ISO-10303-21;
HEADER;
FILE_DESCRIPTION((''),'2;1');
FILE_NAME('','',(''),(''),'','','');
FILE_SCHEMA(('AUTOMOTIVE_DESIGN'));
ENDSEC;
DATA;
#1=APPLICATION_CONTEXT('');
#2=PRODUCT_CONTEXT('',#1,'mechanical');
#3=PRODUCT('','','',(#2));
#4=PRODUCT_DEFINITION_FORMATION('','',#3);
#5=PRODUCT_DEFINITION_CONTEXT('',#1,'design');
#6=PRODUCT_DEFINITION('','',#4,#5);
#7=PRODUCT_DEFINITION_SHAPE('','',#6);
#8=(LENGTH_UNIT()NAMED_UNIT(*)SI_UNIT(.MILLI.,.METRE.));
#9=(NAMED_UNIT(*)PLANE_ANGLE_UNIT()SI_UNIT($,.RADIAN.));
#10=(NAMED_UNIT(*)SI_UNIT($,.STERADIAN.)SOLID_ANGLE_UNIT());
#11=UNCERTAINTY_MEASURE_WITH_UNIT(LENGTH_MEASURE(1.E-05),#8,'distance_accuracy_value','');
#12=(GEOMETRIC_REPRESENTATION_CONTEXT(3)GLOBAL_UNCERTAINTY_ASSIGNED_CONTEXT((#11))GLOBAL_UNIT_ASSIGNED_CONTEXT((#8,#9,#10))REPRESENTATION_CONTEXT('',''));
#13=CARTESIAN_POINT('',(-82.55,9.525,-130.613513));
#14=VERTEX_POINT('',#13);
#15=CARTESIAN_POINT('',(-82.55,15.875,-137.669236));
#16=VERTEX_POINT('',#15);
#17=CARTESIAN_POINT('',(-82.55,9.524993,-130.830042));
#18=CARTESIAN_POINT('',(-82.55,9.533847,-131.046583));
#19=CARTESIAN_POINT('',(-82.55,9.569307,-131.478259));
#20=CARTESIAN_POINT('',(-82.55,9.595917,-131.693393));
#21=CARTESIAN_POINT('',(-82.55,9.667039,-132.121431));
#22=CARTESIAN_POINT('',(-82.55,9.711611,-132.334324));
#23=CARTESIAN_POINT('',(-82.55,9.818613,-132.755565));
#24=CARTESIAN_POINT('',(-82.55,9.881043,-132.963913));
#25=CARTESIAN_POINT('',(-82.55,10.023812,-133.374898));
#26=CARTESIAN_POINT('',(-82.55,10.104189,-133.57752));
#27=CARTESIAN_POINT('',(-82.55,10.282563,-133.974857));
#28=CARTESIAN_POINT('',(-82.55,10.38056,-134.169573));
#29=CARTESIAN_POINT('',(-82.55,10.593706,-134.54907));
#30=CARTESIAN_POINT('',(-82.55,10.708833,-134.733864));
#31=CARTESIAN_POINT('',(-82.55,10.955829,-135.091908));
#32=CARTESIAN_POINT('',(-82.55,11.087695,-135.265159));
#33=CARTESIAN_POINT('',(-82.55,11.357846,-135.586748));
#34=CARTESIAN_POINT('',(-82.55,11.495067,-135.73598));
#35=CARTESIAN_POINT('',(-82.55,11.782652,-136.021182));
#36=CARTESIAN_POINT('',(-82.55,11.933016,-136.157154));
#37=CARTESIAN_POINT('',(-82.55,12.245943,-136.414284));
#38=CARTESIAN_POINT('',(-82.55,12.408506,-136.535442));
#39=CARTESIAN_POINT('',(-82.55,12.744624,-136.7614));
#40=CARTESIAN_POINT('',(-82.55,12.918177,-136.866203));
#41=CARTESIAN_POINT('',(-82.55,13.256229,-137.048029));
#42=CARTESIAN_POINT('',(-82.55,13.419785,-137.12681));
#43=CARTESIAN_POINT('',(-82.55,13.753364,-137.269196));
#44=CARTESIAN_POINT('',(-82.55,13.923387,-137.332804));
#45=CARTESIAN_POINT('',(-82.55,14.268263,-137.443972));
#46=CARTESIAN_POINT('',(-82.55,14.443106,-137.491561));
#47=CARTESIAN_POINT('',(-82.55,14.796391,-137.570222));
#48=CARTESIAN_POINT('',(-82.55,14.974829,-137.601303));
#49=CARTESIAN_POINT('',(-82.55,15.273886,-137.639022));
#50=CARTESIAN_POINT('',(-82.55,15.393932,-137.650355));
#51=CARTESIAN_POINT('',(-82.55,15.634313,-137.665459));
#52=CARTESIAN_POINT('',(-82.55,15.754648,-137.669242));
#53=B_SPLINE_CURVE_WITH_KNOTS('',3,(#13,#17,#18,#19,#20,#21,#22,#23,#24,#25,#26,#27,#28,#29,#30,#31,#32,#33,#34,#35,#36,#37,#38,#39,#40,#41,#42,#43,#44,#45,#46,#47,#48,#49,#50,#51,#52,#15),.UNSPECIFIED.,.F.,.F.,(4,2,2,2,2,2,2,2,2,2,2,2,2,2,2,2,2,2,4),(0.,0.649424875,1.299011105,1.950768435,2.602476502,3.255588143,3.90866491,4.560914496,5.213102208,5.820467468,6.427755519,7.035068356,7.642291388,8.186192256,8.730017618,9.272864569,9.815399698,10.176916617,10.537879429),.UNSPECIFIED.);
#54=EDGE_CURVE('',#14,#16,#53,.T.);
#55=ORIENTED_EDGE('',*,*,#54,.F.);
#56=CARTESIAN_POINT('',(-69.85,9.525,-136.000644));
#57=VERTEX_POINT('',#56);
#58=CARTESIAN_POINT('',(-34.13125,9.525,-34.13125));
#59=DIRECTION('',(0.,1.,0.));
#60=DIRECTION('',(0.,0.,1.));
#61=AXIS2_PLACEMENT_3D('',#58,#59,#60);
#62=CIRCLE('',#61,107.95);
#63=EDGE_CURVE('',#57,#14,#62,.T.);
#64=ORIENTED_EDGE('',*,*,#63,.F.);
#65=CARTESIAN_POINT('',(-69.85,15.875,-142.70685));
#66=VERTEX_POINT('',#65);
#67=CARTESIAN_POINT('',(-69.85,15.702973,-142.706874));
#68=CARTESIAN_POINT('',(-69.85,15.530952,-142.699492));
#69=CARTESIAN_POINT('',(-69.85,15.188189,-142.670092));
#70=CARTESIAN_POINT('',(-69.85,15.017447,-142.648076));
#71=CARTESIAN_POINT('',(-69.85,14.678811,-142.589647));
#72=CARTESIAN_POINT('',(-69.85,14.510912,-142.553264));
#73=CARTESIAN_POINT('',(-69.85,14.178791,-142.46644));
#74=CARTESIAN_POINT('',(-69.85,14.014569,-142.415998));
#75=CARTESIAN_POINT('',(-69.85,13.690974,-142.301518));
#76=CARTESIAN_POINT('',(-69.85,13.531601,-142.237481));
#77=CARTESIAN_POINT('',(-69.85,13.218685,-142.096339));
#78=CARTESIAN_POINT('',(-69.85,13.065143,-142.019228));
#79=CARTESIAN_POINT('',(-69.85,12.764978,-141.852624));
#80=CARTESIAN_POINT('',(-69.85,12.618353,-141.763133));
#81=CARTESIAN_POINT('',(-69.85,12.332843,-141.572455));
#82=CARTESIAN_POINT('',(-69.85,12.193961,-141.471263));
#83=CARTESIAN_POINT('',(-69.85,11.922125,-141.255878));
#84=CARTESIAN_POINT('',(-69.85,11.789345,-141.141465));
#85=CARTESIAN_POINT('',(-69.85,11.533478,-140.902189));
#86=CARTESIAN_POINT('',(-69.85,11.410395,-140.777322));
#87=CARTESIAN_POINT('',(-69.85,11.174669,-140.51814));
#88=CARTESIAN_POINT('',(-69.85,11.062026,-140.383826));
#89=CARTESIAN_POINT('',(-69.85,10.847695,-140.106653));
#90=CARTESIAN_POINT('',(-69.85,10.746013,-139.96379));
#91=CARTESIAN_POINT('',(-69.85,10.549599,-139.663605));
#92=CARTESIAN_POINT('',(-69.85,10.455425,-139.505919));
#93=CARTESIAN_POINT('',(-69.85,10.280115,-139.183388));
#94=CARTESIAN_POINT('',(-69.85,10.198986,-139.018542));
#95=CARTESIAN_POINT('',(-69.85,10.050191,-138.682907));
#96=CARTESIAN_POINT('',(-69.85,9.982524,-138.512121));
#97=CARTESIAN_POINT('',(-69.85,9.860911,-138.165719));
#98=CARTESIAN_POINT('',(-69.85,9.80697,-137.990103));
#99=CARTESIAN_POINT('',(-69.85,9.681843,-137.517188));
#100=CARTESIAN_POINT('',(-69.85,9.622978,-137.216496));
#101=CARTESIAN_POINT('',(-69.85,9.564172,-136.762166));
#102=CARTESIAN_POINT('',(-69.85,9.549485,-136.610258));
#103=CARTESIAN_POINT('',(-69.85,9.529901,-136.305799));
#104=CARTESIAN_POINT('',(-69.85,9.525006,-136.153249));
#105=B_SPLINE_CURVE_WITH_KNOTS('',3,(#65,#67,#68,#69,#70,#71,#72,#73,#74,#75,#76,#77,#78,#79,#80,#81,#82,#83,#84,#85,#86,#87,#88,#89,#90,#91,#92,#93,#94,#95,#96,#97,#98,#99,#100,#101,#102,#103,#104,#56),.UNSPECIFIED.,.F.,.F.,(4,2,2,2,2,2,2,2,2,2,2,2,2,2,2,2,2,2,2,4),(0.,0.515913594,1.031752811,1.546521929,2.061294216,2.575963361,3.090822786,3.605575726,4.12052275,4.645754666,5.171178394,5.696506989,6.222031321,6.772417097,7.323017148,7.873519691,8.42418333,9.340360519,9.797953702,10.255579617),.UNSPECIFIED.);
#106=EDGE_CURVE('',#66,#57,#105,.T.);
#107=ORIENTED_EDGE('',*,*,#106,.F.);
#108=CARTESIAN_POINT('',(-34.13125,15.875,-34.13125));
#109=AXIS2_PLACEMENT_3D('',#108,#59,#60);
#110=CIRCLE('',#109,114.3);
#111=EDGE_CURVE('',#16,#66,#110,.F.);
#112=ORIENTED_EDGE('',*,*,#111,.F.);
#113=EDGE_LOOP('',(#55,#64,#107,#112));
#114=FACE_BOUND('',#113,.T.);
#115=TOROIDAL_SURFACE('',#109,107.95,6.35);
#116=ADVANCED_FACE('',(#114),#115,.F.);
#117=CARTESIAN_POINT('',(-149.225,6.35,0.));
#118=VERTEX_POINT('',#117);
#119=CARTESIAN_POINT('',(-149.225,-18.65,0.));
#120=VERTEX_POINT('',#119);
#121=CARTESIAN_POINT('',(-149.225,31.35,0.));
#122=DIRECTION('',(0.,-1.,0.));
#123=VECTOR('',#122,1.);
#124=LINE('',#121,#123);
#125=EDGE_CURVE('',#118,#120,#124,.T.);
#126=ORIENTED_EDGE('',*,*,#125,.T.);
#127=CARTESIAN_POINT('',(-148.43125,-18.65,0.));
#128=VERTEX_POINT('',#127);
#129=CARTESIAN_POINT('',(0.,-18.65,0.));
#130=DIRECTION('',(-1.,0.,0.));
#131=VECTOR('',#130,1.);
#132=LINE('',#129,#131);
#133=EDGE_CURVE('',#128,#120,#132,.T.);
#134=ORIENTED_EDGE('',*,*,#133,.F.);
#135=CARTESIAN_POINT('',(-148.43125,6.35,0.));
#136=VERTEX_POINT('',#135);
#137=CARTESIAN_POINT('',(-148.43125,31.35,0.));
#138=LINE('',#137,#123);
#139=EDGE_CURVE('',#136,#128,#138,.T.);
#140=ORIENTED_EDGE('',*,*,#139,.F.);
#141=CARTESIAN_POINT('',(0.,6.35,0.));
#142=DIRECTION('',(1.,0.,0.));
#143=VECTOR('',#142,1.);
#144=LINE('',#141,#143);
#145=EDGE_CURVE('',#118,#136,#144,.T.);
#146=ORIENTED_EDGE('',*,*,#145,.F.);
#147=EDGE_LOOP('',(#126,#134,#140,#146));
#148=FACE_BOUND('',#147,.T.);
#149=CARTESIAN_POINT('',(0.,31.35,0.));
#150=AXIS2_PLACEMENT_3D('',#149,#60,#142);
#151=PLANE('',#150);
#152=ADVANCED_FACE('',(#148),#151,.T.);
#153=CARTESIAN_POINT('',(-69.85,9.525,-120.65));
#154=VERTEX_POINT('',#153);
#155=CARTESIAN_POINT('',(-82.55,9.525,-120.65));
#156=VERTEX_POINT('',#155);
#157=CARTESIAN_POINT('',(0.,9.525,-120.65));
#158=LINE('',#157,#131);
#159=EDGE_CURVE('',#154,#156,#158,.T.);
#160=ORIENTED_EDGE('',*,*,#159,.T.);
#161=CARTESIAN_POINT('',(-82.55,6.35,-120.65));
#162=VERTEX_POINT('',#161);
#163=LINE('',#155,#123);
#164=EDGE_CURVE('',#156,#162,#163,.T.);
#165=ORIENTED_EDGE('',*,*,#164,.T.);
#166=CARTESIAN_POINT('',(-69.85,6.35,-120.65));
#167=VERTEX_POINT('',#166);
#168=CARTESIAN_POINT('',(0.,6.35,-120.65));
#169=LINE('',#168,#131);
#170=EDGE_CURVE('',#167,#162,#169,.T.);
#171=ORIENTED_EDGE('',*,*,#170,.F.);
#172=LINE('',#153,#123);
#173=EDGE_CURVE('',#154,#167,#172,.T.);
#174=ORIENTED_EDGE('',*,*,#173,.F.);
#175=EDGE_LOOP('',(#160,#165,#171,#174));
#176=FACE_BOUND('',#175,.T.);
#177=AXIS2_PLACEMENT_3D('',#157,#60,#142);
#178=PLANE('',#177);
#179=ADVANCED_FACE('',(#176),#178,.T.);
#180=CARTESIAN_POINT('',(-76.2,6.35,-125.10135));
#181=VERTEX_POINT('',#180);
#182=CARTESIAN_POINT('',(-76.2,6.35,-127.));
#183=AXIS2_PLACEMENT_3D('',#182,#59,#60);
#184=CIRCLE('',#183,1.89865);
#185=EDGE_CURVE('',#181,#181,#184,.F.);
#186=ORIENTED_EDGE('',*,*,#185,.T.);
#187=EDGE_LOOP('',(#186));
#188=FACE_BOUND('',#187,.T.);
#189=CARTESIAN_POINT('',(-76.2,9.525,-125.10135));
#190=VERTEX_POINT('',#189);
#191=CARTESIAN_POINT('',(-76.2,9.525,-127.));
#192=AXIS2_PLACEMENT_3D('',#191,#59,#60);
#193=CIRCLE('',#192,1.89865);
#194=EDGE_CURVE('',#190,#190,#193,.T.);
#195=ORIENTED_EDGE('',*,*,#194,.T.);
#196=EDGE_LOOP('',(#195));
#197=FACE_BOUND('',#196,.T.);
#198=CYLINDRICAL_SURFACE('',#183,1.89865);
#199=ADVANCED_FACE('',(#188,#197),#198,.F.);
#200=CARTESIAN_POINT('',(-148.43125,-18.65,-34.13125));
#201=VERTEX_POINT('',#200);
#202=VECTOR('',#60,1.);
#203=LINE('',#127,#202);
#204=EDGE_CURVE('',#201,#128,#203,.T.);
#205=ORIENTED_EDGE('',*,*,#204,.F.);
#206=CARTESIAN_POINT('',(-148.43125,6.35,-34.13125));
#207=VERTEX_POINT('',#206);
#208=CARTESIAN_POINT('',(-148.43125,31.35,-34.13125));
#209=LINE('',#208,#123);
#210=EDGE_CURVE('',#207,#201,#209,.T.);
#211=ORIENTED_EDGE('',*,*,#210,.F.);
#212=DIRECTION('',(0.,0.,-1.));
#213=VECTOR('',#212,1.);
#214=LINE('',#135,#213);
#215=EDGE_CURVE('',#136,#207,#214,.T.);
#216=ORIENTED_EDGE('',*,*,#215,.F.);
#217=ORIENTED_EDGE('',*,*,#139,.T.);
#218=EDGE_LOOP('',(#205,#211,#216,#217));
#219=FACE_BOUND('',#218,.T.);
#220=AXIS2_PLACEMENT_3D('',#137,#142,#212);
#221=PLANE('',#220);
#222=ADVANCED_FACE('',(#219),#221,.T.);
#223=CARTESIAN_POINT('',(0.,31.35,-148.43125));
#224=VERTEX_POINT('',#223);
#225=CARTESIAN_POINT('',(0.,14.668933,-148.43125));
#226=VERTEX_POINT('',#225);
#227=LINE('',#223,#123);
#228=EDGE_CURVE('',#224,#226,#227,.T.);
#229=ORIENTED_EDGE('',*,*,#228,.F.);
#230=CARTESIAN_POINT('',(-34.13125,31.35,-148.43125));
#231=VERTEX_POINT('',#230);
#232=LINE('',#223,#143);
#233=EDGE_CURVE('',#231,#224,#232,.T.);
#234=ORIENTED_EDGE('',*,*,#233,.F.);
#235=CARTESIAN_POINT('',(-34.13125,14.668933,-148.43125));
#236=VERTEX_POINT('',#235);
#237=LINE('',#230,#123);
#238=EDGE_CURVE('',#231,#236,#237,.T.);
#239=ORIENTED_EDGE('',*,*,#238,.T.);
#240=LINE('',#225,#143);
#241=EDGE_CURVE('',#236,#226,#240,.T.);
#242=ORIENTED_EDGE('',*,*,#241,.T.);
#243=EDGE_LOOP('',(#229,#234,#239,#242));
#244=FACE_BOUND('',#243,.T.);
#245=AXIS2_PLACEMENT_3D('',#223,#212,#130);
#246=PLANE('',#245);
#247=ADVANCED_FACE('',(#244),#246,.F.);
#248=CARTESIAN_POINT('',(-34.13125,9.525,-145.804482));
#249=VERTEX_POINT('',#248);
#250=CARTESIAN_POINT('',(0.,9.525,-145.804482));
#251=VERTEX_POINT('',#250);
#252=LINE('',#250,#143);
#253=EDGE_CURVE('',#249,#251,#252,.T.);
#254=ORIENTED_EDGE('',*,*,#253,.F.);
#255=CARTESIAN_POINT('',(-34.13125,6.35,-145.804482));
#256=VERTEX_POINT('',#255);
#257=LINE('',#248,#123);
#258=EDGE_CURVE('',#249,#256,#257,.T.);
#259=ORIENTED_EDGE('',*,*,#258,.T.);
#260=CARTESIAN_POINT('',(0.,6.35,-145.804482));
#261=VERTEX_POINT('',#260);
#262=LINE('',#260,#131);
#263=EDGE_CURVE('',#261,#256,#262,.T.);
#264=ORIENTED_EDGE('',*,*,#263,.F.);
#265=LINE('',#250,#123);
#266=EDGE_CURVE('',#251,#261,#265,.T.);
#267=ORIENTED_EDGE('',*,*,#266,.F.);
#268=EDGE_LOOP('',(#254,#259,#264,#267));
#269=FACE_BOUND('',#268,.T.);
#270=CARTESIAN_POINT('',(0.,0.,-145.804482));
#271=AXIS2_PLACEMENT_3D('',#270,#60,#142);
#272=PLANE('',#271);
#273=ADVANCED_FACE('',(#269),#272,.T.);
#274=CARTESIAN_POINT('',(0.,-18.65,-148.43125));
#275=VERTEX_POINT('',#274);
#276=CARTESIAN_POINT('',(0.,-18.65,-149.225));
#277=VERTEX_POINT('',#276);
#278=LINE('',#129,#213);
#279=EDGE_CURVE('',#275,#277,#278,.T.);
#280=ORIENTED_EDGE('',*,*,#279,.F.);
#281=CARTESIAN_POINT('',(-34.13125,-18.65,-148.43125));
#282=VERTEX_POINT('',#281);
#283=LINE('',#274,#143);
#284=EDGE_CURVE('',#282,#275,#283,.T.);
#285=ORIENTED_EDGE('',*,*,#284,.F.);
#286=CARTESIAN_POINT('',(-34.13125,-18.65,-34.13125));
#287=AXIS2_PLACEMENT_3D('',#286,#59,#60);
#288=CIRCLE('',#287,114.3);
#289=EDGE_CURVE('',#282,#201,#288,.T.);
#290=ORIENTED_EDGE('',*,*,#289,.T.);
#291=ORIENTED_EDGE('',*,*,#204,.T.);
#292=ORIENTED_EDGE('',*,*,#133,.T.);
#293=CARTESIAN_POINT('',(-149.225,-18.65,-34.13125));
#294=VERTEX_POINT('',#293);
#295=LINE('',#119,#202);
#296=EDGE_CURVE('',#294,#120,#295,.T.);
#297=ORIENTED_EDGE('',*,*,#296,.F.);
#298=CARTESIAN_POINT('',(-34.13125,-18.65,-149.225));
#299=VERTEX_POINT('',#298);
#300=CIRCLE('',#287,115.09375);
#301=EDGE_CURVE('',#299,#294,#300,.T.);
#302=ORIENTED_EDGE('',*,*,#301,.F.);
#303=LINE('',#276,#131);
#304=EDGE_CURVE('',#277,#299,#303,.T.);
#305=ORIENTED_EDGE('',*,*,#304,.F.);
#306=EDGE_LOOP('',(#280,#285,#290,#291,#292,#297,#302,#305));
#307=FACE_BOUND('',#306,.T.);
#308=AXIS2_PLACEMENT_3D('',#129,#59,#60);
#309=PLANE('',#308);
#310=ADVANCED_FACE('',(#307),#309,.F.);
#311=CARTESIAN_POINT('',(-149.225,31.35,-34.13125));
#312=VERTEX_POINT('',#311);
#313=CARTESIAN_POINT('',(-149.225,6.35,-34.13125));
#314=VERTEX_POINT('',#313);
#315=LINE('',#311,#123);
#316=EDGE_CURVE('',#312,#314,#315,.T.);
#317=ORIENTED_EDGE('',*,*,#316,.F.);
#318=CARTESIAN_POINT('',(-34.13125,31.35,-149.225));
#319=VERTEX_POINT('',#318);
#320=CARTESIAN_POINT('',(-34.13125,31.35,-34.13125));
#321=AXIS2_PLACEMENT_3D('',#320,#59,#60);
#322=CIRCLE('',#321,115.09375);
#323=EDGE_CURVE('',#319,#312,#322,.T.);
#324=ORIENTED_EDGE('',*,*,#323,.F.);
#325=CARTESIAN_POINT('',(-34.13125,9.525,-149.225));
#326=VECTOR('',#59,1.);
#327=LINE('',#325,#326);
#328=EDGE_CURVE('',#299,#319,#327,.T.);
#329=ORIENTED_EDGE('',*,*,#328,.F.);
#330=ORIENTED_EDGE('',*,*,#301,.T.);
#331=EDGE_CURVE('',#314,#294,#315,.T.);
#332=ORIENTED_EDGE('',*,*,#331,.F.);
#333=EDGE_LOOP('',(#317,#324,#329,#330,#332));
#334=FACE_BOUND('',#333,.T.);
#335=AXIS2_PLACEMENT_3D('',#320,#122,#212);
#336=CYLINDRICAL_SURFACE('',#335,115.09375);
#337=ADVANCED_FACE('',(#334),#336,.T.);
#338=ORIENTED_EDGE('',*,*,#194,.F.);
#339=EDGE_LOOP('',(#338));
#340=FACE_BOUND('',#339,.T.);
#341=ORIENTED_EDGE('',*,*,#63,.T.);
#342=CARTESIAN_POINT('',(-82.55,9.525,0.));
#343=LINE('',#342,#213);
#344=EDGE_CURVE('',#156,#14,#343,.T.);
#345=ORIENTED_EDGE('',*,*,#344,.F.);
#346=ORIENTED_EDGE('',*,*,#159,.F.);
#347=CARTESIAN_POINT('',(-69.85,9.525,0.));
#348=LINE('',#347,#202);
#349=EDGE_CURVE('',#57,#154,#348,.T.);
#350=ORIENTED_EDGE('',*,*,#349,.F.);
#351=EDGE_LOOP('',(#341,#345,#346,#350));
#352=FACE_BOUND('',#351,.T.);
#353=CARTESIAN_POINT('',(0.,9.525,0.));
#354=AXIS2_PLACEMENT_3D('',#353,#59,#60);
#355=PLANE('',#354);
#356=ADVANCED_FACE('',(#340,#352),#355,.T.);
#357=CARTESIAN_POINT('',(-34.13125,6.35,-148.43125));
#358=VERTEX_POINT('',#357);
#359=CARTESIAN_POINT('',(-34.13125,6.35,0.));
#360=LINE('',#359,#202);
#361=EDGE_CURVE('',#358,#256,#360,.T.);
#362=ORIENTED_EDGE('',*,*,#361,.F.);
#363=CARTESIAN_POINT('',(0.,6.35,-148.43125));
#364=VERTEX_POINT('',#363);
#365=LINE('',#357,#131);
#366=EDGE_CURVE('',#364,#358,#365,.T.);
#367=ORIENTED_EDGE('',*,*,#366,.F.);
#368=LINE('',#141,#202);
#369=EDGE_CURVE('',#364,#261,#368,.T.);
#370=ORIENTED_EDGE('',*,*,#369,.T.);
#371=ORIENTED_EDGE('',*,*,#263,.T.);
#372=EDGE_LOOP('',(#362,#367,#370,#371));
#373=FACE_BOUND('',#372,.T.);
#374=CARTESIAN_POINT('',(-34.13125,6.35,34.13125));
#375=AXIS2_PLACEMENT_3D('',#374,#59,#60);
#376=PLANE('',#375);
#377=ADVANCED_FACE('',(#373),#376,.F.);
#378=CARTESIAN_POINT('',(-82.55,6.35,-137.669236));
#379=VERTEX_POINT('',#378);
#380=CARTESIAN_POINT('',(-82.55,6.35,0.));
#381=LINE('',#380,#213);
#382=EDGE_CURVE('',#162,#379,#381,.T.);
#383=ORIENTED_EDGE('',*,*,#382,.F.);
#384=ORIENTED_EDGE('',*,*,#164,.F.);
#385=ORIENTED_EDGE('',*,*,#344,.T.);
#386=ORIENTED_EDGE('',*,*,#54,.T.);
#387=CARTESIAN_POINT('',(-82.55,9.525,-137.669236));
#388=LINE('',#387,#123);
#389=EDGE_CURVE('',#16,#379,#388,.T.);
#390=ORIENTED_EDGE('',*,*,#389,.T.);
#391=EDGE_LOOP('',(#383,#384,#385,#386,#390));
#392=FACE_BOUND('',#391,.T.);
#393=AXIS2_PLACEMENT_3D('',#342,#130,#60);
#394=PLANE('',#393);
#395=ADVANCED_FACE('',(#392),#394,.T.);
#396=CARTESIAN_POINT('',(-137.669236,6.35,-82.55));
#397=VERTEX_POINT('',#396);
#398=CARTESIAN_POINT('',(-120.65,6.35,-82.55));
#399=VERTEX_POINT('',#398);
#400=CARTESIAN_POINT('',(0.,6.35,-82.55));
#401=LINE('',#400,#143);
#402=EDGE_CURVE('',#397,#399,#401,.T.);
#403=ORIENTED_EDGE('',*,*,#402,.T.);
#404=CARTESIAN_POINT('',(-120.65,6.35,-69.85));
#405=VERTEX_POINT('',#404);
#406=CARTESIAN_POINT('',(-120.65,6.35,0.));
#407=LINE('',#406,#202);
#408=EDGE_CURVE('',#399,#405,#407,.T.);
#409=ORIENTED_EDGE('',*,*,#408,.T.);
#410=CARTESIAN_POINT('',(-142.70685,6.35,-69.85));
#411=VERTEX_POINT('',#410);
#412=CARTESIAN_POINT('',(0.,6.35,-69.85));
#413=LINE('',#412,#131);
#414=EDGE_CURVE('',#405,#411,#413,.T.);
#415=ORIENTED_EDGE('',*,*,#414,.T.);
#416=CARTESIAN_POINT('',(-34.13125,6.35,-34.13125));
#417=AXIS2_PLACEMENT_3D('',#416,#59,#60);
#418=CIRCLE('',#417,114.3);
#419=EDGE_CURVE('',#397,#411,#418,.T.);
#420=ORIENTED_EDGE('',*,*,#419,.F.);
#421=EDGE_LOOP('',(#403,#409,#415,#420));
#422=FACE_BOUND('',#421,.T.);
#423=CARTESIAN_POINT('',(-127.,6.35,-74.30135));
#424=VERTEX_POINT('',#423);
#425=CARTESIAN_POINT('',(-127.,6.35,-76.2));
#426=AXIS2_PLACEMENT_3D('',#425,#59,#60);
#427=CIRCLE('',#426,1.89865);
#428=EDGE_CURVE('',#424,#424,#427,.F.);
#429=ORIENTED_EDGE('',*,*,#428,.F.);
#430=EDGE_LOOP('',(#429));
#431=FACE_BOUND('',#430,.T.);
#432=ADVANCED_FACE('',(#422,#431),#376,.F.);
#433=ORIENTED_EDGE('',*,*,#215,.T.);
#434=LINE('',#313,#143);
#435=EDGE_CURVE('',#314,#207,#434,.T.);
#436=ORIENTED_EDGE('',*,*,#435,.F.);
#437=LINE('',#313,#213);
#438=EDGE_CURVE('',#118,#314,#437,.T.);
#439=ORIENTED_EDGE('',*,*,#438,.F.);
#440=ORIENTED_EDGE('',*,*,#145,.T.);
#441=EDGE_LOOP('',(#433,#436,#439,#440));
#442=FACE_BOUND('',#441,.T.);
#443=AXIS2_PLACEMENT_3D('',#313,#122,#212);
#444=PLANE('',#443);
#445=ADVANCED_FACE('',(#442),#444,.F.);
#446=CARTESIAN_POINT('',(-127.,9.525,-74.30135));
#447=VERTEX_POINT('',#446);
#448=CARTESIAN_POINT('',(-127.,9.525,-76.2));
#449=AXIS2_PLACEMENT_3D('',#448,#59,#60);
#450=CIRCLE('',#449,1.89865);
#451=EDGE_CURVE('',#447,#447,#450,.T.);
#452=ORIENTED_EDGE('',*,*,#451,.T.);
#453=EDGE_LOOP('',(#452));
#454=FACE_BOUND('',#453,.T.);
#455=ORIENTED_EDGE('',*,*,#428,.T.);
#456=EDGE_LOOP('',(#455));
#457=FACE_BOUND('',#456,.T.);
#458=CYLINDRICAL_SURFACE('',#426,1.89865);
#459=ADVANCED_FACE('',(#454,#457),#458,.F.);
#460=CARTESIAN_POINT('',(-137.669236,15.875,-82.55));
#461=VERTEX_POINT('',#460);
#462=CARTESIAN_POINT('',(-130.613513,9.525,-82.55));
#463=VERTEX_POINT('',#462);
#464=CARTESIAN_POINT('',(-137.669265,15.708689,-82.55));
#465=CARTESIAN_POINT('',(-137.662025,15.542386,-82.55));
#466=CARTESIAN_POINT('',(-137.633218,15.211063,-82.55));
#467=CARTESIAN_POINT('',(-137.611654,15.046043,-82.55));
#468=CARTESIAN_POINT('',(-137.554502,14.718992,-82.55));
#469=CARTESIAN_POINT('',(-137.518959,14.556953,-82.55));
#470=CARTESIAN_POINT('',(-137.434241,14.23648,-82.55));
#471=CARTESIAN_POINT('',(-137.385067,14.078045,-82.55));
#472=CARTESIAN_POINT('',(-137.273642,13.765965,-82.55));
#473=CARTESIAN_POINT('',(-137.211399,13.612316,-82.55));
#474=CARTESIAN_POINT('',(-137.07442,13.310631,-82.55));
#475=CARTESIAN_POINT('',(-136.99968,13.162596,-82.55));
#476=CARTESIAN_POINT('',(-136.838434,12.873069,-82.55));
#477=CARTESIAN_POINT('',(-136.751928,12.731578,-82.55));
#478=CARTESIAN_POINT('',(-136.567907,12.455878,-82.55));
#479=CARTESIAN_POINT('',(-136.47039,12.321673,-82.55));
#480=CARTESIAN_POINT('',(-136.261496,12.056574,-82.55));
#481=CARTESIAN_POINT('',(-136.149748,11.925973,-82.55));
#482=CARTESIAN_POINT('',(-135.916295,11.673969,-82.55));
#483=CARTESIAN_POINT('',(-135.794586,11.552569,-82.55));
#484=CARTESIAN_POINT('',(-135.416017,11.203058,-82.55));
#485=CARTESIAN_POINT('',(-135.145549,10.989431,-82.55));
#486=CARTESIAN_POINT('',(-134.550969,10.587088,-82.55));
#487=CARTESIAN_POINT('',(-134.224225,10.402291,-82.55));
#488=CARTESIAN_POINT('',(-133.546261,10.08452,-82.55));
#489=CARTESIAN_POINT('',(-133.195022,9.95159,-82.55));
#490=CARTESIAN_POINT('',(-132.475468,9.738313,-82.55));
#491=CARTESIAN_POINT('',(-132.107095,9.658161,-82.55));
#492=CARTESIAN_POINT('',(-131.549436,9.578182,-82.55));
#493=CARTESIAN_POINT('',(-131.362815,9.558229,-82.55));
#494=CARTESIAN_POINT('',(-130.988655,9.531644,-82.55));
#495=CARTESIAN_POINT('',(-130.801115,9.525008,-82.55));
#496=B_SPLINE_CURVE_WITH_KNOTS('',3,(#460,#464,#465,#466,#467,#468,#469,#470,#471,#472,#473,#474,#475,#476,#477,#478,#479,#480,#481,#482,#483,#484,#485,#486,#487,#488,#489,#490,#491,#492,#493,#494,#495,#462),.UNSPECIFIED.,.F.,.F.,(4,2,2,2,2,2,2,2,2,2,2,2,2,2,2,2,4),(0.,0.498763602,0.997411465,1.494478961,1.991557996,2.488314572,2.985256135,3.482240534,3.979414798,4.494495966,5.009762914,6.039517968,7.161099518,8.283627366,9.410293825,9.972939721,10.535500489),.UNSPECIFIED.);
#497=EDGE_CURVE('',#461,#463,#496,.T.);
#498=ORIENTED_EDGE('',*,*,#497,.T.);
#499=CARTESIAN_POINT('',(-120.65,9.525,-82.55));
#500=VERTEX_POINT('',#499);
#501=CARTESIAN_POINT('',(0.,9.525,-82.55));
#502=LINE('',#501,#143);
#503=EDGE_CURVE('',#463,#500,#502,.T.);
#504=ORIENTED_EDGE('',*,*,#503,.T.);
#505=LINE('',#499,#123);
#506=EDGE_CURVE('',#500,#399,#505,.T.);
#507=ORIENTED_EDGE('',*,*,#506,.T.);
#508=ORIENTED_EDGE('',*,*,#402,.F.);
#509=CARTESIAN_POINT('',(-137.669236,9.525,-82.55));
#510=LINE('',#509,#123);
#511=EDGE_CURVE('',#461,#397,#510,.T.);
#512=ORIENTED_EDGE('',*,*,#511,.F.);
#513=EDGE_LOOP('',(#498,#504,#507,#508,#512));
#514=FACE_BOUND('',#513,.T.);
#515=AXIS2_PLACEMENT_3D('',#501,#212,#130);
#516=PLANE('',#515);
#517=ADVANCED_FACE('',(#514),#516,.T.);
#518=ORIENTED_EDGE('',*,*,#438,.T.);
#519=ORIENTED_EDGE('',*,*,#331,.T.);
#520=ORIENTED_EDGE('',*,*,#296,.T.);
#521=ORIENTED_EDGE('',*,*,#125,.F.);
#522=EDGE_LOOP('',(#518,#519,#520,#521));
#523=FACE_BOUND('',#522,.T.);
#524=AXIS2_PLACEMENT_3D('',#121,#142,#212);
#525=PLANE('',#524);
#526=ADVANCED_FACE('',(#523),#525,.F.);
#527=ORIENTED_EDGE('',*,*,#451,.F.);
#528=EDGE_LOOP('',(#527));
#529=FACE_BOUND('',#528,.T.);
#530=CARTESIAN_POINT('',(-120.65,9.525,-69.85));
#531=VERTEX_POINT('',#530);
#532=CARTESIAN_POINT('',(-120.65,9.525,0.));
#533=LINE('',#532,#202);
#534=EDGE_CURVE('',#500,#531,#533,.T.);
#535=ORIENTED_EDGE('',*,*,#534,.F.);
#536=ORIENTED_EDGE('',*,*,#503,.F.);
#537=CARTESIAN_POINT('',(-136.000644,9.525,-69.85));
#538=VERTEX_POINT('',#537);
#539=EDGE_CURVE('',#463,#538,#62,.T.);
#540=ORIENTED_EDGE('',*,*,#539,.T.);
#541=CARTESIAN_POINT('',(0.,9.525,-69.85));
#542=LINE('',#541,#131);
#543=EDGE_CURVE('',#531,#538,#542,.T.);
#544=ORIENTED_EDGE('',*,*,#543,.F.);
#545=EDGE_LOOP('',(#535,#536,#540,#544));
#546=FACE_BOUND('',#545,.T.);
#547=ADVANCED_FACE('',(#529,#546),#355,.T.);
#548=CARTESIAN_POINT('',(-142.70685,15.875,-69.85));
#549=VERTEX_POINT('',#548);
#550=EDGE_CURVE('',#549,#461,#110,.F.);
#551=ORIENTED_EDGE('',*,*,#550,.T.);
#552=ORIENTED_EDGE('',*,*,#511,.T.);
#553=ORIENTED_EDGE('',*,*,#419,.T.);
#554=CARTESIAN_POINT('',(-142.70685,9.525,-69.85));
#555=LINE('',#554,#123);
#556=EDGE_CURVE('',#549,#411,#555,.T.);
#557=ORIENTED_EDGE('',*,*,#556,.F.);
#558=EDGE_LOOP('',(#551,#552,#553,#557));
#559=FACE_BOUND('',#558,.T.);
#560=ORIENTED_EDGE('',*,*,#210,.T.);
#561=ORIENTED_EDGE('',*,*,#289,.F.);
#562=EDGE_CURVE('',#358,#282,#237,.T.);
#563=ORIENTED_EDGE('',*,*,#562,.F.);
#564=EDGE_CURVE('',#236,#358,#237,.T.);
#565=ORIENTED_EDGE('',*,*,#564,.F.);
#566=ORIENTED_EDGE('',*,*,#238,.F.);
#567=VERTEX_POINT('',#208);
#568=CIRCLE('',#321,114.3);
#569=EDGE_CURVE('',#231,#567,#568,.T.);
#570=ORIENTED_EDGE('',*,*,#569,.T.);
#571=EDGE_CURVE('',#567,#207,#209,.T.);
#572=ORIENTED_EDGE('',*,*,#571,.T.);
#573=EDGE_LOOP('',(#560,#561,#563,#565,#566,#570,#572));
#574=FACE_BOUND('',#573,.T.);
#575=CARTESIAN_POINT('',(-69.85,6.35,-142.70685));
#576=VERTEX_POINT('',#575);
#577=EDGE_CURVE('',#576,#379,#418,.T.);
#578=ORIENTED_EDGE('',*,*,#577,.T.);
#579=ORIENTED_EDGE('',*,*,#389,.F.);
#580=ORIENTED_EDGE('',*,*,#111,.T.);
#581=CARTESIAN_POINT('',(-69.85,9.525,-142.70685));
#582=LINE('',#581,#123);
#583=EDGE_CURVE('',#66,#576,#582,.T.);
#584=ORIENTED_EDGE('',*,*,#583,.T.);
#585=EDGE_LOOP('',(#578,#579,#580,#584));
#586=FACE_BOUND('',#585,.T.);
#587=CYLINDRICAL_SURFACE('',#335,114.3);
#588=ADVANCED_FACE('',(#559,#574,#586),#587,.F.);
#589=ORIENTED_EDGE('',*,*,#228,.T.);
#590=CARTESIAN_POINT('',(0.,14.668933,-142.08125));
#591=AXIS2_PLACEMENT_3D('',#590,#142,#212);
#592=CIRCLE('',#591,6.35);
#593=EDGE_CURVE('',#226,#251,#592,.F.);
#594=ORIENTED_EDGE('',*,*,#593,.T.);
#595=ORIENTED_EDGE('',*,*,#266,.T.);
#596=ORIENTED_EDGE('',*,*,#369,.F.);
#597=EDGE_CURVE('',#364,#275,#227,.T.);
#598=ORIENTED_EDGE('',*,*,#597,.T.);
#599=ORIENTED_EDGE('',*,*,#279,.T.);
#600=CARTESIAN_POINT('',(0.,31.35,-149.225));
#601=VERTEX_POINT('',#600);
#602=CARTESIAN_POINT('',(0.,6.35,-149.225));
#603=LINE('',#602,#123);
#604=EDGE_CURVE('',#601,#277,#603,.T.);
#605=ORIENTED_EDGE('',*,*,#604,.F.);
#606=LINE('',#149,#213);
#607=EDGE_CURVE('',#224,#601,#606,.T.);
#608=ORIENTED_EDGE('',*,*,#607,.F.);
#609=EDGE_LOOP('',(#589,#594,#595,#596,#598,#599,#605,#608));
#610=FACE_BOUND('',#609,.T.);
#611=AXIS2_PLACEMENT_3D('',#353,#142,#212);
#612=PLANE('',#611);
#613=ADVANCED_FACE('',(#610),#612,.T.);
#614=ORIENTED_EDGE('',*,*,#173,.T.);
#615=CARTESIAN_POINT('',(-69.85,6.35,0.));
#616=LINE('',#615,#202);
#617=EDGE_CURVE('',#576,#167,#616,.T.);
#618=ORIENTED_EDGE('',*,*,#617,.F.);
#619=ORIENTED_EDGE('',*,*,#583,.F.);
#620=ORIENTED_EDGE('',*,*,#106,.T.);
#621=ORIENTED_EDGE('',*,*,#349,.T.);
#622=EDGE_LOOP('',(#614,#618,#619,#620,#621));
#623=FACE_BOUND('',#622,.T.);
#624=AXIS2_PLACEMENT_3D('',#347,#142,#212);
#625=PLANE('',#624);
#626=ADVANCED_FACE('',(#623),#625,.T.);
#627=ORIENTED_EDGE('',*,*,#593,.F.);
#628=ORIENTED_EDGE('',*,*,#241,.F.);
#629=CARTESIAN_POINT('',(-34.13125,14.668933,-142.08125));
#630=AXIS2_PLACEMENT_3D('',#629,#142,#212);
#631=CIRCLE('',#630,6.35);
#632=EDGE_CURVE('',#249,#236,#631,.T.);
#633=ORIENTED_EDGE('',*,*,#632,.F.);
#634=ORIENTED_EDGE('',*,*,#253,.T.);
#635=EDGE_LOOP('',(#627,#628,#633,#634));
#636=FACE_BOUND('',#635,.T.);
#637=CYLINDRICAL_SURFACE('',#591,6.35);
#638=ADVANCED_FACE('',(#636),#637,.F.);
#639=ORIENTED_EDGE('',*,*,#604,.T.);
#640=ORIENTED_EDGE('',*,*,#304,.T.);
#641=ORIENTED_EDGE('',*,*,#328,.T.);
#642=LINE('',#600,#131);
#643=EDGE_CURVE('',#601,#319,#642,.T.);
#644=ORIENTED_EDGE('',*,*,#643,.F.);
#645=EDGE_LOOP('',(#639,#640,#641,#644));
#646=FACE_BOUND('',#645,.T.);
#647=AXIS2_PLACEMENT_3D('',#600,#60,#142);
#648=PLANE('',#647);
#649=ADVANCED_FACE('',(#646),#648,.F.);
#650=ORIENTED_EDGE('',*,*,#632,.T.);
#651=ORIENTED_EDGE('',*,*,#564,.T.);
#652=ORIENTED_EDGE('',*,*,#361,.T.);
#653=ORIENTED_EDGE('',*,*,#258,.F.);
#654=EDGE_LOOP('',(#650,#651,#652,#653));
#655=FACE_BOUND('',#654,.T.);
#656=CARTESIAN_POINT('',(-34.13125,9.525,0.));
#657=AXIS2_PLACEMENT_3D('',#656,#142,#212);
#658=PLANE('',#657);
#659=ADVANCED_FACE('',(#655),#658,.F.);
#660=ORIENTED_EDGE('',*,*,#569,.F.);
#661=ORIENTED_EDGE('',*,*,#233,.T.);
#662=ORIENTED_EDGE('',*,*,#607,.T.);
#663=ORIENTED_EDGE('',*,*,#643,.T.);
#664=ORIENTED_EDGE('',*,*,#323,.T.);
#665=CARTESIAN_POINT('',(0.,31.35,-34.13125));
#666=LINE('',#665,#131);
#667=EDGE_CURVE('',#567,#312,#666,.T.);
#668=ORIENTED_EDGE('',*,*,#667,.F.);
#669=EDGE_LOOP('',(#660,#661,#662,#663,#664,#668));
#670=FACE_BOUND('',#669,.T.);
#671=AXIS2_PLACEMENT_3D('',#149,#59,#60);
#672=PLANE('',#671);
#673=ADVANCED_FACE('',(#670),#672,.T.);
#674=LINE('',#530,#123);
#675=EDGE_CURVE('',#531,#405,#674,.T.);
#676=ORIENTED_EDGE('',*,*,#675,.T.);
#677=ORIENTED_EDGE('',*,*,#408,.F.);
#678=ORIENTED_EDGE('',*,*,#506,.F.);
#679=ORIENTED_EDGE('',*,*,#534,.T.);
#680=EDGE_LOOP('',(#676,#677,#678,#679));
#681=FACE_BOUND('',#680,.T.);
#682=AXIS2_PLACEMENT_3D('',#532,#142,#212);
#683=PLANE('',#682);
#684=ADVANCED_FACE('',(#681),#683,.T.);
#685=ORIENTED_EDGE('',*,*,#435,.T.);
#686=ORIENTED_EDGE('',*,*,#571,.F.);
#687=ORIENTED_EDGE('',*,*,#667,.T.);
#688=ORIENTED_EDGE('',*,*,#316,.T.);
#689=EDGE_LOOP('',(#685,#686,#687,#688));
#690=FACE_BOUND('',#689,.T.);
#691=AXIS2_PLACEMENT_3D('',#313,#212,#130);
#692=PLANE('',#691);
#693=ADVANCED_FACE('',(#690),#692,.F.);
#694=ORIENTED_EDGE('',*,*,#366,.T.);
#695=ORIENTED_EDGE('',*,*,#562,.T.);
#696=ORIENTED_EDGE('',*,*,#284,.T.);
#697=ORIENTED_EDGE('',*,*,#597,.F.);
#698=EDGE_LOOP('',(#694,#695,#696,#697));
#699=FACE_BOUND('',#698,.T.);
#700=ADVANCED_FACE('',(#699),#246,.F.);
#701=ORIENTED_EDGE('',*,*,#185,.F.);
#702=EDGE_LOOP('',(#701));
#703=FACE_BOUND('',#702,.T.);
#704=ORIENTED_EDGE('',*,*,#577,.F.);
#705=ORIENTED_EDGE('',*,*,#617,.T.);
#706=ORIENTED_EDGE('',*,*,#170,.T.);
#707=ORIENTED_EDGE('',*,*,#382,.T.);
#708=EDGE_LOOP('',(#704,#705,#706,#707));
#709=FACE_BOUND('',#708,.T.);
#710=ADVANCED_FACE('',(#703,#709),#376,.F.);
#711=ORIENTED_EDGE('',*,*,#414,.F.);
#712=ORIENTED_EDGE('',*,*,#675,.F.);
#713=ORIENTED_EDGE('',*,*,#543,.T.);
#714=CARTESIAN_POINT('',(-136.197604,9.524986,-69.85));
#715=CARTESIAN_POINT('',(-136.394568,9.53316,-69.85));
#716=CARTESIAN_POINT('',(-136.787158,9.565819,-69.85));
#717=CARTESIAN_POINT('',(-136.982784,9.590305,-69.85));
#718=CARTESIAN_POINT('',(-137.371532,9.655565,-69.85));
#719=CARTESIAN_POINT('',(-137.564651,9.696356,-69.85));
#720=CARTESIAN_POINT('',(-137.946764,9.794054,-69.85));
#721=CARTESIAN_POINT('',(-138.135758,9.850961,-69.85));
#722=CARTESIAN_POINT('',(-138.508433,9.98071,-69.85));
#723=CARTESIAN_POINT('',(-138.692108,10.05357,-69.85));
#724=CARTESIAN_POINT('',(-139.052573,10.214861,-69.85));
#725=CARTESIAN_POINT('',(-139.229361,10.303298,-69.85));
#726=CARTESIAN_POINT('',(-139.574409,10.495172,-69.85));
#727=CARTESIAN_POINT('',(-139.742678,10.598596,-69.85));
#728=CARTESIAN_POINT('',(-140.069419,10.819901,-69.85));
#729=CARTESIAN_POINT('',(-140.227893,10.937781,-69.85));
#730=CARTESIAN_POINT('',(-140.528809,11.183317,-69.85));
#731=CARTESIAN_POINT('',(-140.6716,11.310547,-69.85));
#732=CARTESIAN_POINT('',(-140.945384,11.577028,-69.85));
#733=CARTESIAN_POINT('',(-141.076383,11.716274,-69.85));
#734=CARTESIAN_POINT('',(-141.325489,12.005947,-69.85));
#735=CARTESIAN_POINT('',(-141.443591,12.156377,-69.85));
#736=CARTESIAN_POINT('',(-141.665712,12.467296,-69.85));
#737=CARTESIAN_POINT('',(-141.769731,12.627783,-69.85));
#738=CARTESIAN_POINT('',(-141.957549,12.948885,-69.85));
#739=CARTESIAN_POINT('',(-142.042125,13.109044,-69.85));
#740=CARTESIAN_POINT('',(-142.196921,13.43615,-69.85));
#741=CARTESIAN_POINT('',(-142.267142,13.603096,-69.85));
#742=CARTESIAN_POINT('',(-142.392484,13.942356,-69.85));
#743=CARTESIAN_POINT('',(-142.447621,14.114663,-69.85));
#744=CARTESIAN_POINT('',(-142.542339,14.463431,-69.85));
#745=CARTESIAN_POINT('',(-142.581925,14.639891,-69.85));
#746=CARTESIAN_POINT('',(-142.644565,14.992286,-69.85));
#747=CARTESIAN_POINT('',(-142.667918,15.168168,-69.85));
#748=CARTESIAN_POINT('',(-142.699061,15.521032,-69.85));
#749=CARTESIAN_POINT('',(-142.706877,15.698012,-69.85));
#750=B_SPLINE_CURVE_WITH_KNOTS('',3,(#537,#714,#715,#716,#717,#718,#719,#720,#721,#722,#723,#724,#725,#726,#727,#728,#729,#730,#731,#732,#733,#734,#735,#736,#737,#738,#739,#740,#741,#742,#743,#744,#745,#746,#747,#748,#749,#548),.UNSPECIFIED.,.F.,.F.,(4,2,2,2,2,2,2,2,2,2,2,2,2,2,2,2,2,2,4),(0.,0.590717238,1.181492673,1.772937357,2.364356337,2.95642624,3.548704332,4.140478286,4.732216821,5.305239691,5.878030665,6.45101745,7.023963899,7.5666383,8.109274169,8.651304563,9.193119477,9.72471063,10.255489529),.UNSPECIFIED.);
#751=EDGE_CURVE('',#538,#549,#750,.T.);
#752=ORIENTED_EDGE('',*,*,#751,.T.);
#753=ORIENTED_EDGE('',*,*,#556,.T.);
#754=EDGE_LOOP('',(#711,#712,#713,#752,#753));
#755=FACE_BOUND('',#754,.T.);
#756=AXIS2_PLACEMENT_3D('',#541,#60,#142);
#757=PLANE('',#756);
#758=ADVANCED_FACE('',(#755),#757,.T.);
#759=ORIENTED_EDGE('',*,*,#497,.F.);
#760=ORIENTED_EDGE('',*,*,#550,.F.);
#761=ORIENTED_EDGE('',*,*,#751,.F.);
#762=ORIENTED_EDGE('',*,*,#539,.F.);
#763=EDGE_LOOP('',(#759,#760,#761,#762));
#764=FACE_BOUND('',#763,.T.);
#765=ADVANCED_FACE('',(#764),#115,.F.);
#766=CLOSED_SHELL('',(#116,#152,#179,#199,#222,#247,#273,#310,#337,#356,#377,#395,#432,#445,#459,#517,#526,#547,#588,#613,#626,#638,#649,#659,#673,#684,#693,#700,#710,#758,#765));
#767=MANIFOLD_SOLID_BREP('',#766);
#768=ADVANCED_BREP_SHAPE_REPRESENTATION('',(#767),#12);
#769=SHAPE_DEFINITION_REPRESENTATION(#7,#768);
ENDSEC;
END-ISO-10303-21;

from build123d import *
from build123d.topology import SkipClean

# Parameters (mm, degrees)
BOSS_EXTRUDE1_DEPTH      = 6.35
CUT_EXTRUDE1_DEPTH       = 6.35
M4_CLEARANCE_HOLE1_D     = 4.5
F_6_CLEARANCE_HOLE1_D    = 3.7973
F_6_CLEARANCE_HOLE2_D    = 3.7973
SKETCH29_R               = 1.898650000000008
BOSS_EXTRUDE4_DEPTH      = 3.175
CUT_EXTRUDE9_DEPTH       = 211.00951038732748
BOSS_EXTRUDE5_DEPTH      = 25
BOSS_EXTRUDE5_DEPTH_BACK = 25
BOSS_EXTRUDE6_DEPTH      = 3.420518063
SKETCH32_W               = 34.13124999999999
SKETCH32_H               = 3.175
BOSS_EXTRUDE7_DEPTH      = 3.420518063
FILLET2_R                = 6.35
FILLET3_R                = 6.35
SKETCH33_W               = 62.65129797244943
SKETCH33_H               = 51.38023684891144
CUT_EXTRUDE10_DEPTH      = 211.97362412866636


with BuildPart() as part:
    # Sketch1 → Boss-Extrude1 (new body)
    with BuildSketch(Plane(origin=(0, 0, 0), x_dir=(1, 0, 0), z_dir=(0, 1, 0))):
        with BuildLine():
            Line((-34.13124999999996, -148.43124999999998), (34.131250000000016, -148.43124999999998))
            ThreePointArc((34.131250000000016, -148.43124999999998), (114.9535550896224, -114.95355508962234), (148.43124999999998, -34.13124999999996))
            Line((148.43124999999998, -34.13124999999996), (148.43124999999998, 34.131250000000016))
            ThreePointArc((148.43124999999998, 34.131250000000016), (114.9535550896224, 114.9535550896224), (34.131250000000016, 148.43125000000003))
            Line((34.131250000000016, 148.43125000000003), (-34.13124999999996, 148.43125000000003))
            ThreePointArc((-34.13124999999996, 148.43125000000003), (-114.95355508962231, 114.95355508962237), (-148.43124999999992, 34.131250000000016))
            Line((-148.43124999999992, 34.131250000000016), (-148.43124999999992, -34.13124999999996))
            ThreePointArc((-148.43124999999992, -34.13124999999996), (-114.95355508962234, -114.95355508962234), (-34.13124999999996, -148.43124999999998))
        make_face()
    extrude(amount=BOSS_EXTRUDE1_DEPTH)

    # Sketch4 → Cut-Extrude1 (cut)
    # profile 1 of 4: a face of its own
    with BuildSketch(Plane(origin=(0, 6.35, 0), x_dir=(1, 0, 0), z_dir=(0, 1, 0))):
        with BuildLine():
            ThreePointArc((-39.4480000000008, 145.80448193711538), (-49.893930566331434, 144.3300216659586), (-59.52363351317686, 140.0218527227403))
            ThreePointArc((-59.52363351317686, 140.0218527227403), (-63.81750000000949, 132.2535819370977), (-59.52363351317676, 124.48531115145514))
            ThreePointArc((-59.52363351317676, 124.48531115145514), (-49.89393056632884, 120.17714220824536), (-39.448000000000604, 118.70268193708908))
            Line((-39.448000000000604, 118.70268193708908), (39.44799999999939, 118.70268193708088))
            ThreePointArc((39.44799999999939, 118.70268193708088), (49.89393056633003, 120.17714220823765), (59.52363351317546, 124.48531115145597))
            ThreePointArc((59.52363351317546, 124.48531115145597), (63.817500000008096, 132.25358193709857), (59.523633513170694, 140.0218527227337))
            ThreePointArc((59.523633513170694, 140.0218527227337), (49.893930566325004, 144.3300216659425), (39.4479999999992, 145.80448193710717))
            Line((39.4479999999992, 145.80448193710717), (-39.4480000000008, 145.80448193711538))
        make_face()
        with BuildLine():
            ThreePointArc((39.447999999999375, 120.29018193708089), (49.454528647108134, 121.70261990502122), (58.67916380898574, 125.82956825808905))
            ThreePointArc((58.67916380898574, 125.82956825808905), (62.229999999999336, 132.25358193709857), (58.67916380898565, 138.67759561610805))
            ThreePointArc((58.67916380898565, 138.67759561610805), (49.45452864710313, 142.80454396915894), (39.447999999999205, 144.21698193711595))
            Line((39.447999999999205, 144.21698193711595), (-39.44800000000079, 144.21698193711538))
            ThreePointArc((-39.44800000000079, 144.21698193711538), (-49.454528647109534, 142.80454396917506), (-58.67916380898715, 138.67759561610723))
            ThreePointArc((-58.67916380898715, 138.67759561610723), (-62.23000000000073, 132.25358193709772), (-58.67916380898706, 125.82956825808822))
            ThreePointArc((-58.67916380898706, 125.82956825808822), (-49.454528647104546, 121.70261990503734), (-39.44800000000062, 120.29018193708033))
            Line((-39.44800000000062, 120.29018193708033), (39.447999999999375, 120.29018193708089))
        make_face(mode=Mode.SUBTRACT)
    # profile 2 of 4: a face of its own
    with BuildSketch(Plane(origin=(0, 6.35, 0), x_dir=(1, 0, 0), z_dir=(0, 1, 0))):
        with BuildLine():
            Line((-39.44800000000062, 120.29018193708033), (39.447999999999375, 120.29018193708089))
            ThreePointArc((39.447999999999375, 120.29018193708089), (49.454528647108134, 121.70261990502122), (58.67916380898574, 125.82956825808905))
            ThreePointArc((58.67916380898574, 125.82956825808905), (62.229999999999336, 132.25358193709857), (58.67916380898565, 138.67759561610805))
            ThreePointArc((58.67916380898565, 138.67759561610805), (49.45452864710313, 142.80454396915894), (39.447999999999205, 144.21698193711595))
            Line((39.447999999999205, 144.21698193711595), (-39.44800000000079, 144.21698193711538))
            ThreePointArc((-39.44800000000079, 144.21698193711538), (-49.454528647109534, 142.80454396917506), (-58.67916380898715, 138.67759561610723))
            ThreePointArc((-58.67916380898715, 138.67759561610723), (-62.23000000000073, 132.25358193709772), (-58.67916380898706, 125.82956825808822))
            ThreePointArc((-58.67916380898706, 125.82956825808822), (-49.454528647104546, 121.70261990503734), (-39.44800000000062, 120.29018193708033))
        make_face()
    # profile 3 of 4: a face of its own
    with BuildSketch(Plane(origin=(0, 6.35, 0), x_dir=(1, 0, 0), z_dir=(0, 1, 0))):
        with BuildLine():
            ThreePointArc((-59.5236335131764, -124.48531115145636), (-63.8175000000091, -132.25358193709894), (-59.52363351317174, -140.02185272273414))
            ThreePointArc((-59.52363351317174, -140.02185272273414), (-49.893930566326084, -144.33002166594298), (-39.44800000000029, -145.80448193711646))
            Line((-39.44800000000029, -145.80448193711646), (39.44799999999971, -145.80448193711646))
            ThreePointArc((39.44799999999971, -145.80448193711646), (49.89393056633035, -144.33002166595978), (59.52363351317579, -140.02185272274153))
            ThreePointArc((59.52363351317579, -140.02185272274153), (63.8175000000085, -132.25358193709894), (59.52363351317116, -124.48531115146376))
            ThreePointArc((59.52363351317116, -124.48531115146376), (49.89393056632551, -120.1771422082549), (39.44799999999971, -118.70268193709018))
            Line((39.44799999999971, -118.70268193709018), (-39.44800000000029, -118.70268193708142))
            ThreePointArc((-39.44800000000029, -118.70268193708142), (-49.89393056633094, -120.17714220823811), (-59.5236335131764, -124.48531115145636))
        make_face()
        with BuildLine():
            ThreePointArc((-58.679163808986694, -138.67759561610845), (-49.454528647104205, -142.8045439691594), (-39.44800000000029, -144.21698193711646))
            Line((-39.44800000000029, -144.21698193711646), (39.44799999999971, -144.21698193711646))
            ThreePointArc((39.44799999999971, -144.21698193711646), (49.45452864710846, -142.8045439691762), (58.679163808986104, -138.67759561610845))
            ThreePointArc((58.679163808986104, -138.67759561610845), (62.22999999999976, -132.25358193709894), (58.679163808986104, -125.82956825808944))
            ThreePointArc((58.679163808986104, -125.82956825808944), (49.45452864710362, -121.7026199050385), (39.44799999999971, -120.29018193708143))
            Line((39.44799999999971, -120.29018193708143), (-39.44800000000029, -120.29018193708143))
            ThreePointArc((-39.44800000000029, -120.29018193708143), (-49.45452864710904, -121.70261990502169), (-58.679163808986694, -125.82956825808944))
            ThreePointArc((-58.679163808986694, -125.82956825808944), (-62.230000000000345, -132.25358193709894), (-58.679163808986694, -138.67759561610845))
        make_face(mode=Mode.SUBTRACT)
    # profile 4 of 4: a face of its own
    with BuildSketch(Plane(origin=(0, 6.35, 0), x_dir=(1, 0, 0), z_dir=(0, 1, 0))):
        with BuildLine():
            ThreePointArc((-58.679163808986694, -125.82956825808944), (-62.230000000000345, -132.25358193709894), (-58.679163808986694, -138.67759561610845))
            ThreePointArc((-58.679163808986694, -138.67759561610845), (-49.454528647104205, -142.8045439691594), (-39.44800000000029, -144.21698193711646))
            Line((-39.44800000000029, -144.21698193711646), (39.44799999999971, -144.21698193711646))
            ThreePointArc((39.44799999999971, -144.21698193711646), (49.45452864710846, -142.8045439691762), (58.679163808986104, -138.67759561610845))
            ThreePointArc((58.679163808986104, -138.67759561610845), (62.22999999999976, -132.25358193709894), (58.679163808986104, -125.82956825808944))
            ThreePointArc((58.679163808986104, -125.82956825808944), (49.45452864710362, -121.7026199050385), (39.44799999999971, -120.29018193708143))
            Line((39.44799999999971, -120.29018193708143), (-39.44800000000029, -120.29018193708143))
            ThreePointArc((-39.44800000000029, -120.29018193708143), (-49.45452864710904, -121.70261990502169), (-58.679163808986694, -125.82956825808944))
        make_face()
    extrude(amount=-CUT_EXTRUDE1_DEPTH, mode=Mode.SUBTRACT)

    # M4 Clearance Hole1 (through all)
    with Locations(Plane(origin=(0, 6.35, 0), x_dir=(1, 0, 0), z_dir=(0, 1, 0))):
        with Locations((-16, -103.6875), (16, -103.6875), (22, -60.325), (-10, -60.325), (-10, 60.325), (22, 60.325), (16, 103.6875), (-16, 103.6875)):
            Hole(M4_CLEARANCE_HOLE1_D / 2)

    # #6 Clearance Hole1 (through all)
    with Locations(Plane(origin=(0, 6.35, 0), x_dir=(1, 0, 0), z_dir=(0, 1, 0))):
        with Locations((-101.6, -101.6), (-101.6, 101.6), (101.6, 101.6), (101.6, -101.6), (-127, -76.2), (-127, -50.8), (-127, 50.8), (-127, 76.2), (-101.6, 76.2), (-101.6, 50.8), (-101.6, 25.4), (-101.6, 0), (-101.6, -25.4), (-101.6, -50.8), (-101.6, -76.2), (-76.2, -101.6), (-50.8, -101.6), (-50.8, -76.2), (-76.2, -76.2), (-76.2, -50.8), (-50.8, -50.8), (-50.8, -25.4), (-76.2, -25.4), (-76.2, 0), (-50.8, 0), (-50.8, 25.4), (-76.2, 25.4), (-76.2, 50.8), (-50.8, 50.8), (-50.8, 76.2), (-76.2, 76.2), (-76.2, 101.6), (-50.8, 101.6), (50.8, -101.6), (76.2, -101.6), (101.6, -76.2), (127, -76.2), (127, -50.8), (101.6, -25.4), (101.6, -50.8), (76.2, -25.4), (76.2, -50.8), (76.2, -76.2), (50.8, -76.2), (50.8, -50.8), (50.8, -25.4), (50.8, 0), (76.2, 0), (101.6, 0), (101.6, 25.4), (101.6, 50.8), (101.6, 76.2), (127, 50.8), (127, 76.2), (76.2, 101.6), (50.8, 101.6), (50.8, 76.2), (76.2, 76.2), (76.2, 50.8), (76.2, 25.4), (50.8, 25.4), (50.8, 50.8), (0, 0), (-25.4, -25.4), (-25.4, 0), (-25.4, 25.4), (0, 25.4), (25.4, 25.4), (25.4, 0), (25.4, -25.4), (0, -25.4), (127, -25.4), (127, 0), (127, 25.4), (-127, -25.4), (-127, 0), (-127, 25.4)):
            Hole(F_6_CLEARANCE_HOLE1_D / 2)

    # #6 Clearance Hole2 (through all)
    with Locations(Plane(origin=(0, 6.35, 0), x_dir=(1, 0, 0), z_dir=(0, 1, 0))):
        with Locations((-76.2, -127), (76.2, -127), (76.2, 127), (-76.2, 127)):
            Hole(F_6_CLEARANCE_HOLE2_D / 2)

    # Sketch29 → Boss-Extrude4 (add)
    # profile 1 of 4: a face of its own
    with BuildSketch(Plane(origin=(0, 6.35, 0), x_dir=(1, 0, 0), z_dir=(0, 1, 0))):
        with BuildLine():
            Line((-69.85, 120.64999999999999), (-69.85, 142.70684992207043))
            ThreePointArc((-69.85, 142.70684992207043), (-76.27533753088031, 140.3779717667891), (-82.55, 137.66923649982286))
            Line((-82.55, 137.6692364998229), (-82.54999999999998, 120.64999999999999))
            Line((-82.54999999999998, 120.64999999999999), (-69.85, 120.64999999999999))
        make_face()
        with Locations(Location((-76.19999999999999, 127, 0), (0, 0, 270))):
            Circle(SKETCH29_R, mode=Mode.SUBTRACT)
    # profile 2 of 4: a face of its own
    with BuildSketch(Plane(origin=(0, 6.35, 0), x_dir=(1, 0, 0), z_dir=(0, 1, 0))):
        with BuildLine():
            Line((-120.6500000000006, 82.54999999999993), (-137.6692364998229, 82.54999999999993))
            ThreePointArc((-137.66923649982286, 82.5499999999999), (-140.37797176678907, 76.27533753088025), (-142.70684992207038, 69.84999999999994))
            Line((-142.70684992207043, 69.84999999999994), (-120.6500000000006, 69.84999999999994))
            Line((-120.6500000000006, 69.84999999999994), (-120.6500000000006, 82.54999999999993))
        make_face()
        with Locations(Location((-127.00000000000061, 76.19999999999993, 0), (0, 0, 270))):
            Circle(SKETCH29_R, mode=Mode.SUBTRACT)
    # profile 3 of 4: a face of its own
    with BuildSketch(Plane(origin=(0, 6.35, 0), x_dir=(1, 0, 0), z_dir=(0, 1, 0))):
        Polygon((-145.8044819371153, 34.13124999999998), (-145.8044819371153, 0), (-148.43124999999995, 2.082e-14), (-148.43124999999995, 34.131249999999994), align=None)
    # profile 4 of 4: a face of its own
    with BuildSketch(Plane(origin=(0, 6.35, 0), x_dir=(1, 0, 0), z_dir=(0, 1, 0))):
        Polygon((2.776e-14, 148.43125), (0, 145.80448193711538), (-34.13124999999999, 145.80448193711538), (-34.13124999999996, 148.43125000000003), align=None)
    extrude(amount=BOSS_EXTRUDE4_DEPTH)

    # Sketch30 → Cut-Extrude9 (cut, through all)
    with BuildSketch(Plane(origin=(0, 6.35, 0), x_dir=(1, 0, 0), z_dir=(0, 1, 0))):
        with BuildLine():
            Line((-34.13124999999998, -148.43124999999995), (34.131250000000016, -148.43124999999998))
            ThreePointArc((34.131250000000016, -148.43124999999998), (114.9535550896224, -114.95355508962234), (148.43125, -34.13124999999996))
            Line((148.43125, -34.13124999999996), (148.43124999999998, 34.131250000000016))
            ThreePointArc((148.43124999999998, 34.131250000000016), (114.95355508962237, 114.95355508962237), (34.13125000000002, 148.43125))
            Line((34.13125000000002, 148.43125), (-34.13124999999996, 148.43125000000003))
            ThreePointArc((-34.13124999999996, 148.43125000000003), (-114.95355508962234, 114.9535550896224), (-148.43124999999995, 34.13125000000003))
            Line((-148.43124999999995, 34.13125000000003), (-148.43124999999995, -34.131249999999945))
            ThreePointArc((-148.43124999999995, -34.131249999999945), (-114.95355508962234, -114.95355508962231), (-34.13124999999998, -148.43124999999995))
        make_face()
    extrude(amount=-CUT_EXTRUDE9_DEPTH, mode=Mode.SUBTRACT)


with BuildPart() as cut_extrude9_piece_1:
    # of the separate pieces the step leaves, piece 1, a body of its own (cut_extrude9_pieces)
    add(part.part.solids().sort_by_distance((-82.55, 6.35, -137.6692365))[0])



with BuildPart() as cut_extrude9_piece_2:
    # of the separate pieces the step leaves, piece 2, a body of its own (cut_extrude9_pieces)
    add(part.part.solids().sort_by_distance((-142.706849922, 6.35, -69.85))[0])


with BuildPart() as cut_extrude9_piece_3:
    # of the separate pieces the step leaves, piece 3, a body of its own (cut_extrude9_pieces)
    add(part.part.solids().sort_by_distance((-148.43125, 6.35, -34.13125))[0])


with BuildPart() as cut_extrude9_piece_4:
    # of the separate pieces the step leaves, piece 4, a body of its own (cut_extrude9_pieces)
    add(part.part.solids().sort_by_distance((-34.13125, 6.35, -145.804481937))[0])


with BuildPart() as cut_extrude9_piece_1_1:
    add(cut_extrude9_piece_1.part)

    add(cut_extrude9_piece_2.part)  # Boss-Extrude5 merges Cut-Extrude9 piece 2
    # Sketch29<7> → Boss-Extrude5 (add, two sides: drawn at the far end of the back side and taken through both)
    with BuildSketch(Plane(origin=(0, 6.35, 0), x_dir=(1, 0, 0), z_dir=(0, 1, 0)).offset(-BOSS_EXTRUDE5_DEPTH_BACK)):
        with BuildLine():
            ThreePointArc((-69.85, 142.70684992207043), (-52.21852354947877, 146.99107693388436), (-34.13124999999996, 148.43125000000003))
            Line((-34.13124999999996, 148.43125000000003), (2.842e-14, 148.43125))
            Line((2.776e-14, 148.43125), (2.776e-14, 149.22500000000002))
            Line((2.776e-14, 149.22500000000002), (-34.13124999999996, 149.22500000000002))
            ThreePointArc((-34.13124999999995, 149.22500000000002), (-115.51482109718914, 115.51482109718923), (-149.22499999999997, 34.13125000000003))
            Line((-149.22499999999997, 34.131249999999994), (-149.22499999999997, 2.132e-14))
            Line((-149.22499999999997, 2.082e-14), (-148.43124999999995, 2.082e-14))
            Line((-148.43124999999995, 2.132e-14), (-148.43124999999995, 34.131249999999994))
            ThreePointArc((-148.43124999999995, 34.13125000000001), (-146.9910769338843, 52.218523549478746), (-142.70684992207038, 69.84999999999994))
            ThreePointArc((-142.70684992207038, 69.84999999999994), (-140.37797176678907, 76.27533753088025), (-137.66923649982286, 82.5499999999999))
            ThreePointArc((-137.6692364998229, 82.54999999999994), (-114.9535550896224, 114.95355508962237), (-82.55000000000001, 137.66923649982292))
            ThreePointArc((-82.55, 137.66923649982286), (-76.27533753088031, 140.3779717667891), (-69.85, 142.70684992207043))
        make_face()
    extrude(amount=BOSS_EXTRUDE5_DEPTH + BOSS_EXTRUDE5_DEPTH_BACK)


    add(cut_extrude9_piece_3.part)  # Boss-Extrude6 merges Cut-Extrude9 piece 3
    # Sketch31 → Boss-Extrude6 (add)
    with BuildSketch(Plane(origin=(-145.8044819371153, 0, 0), x_dir=(0, 0, -1), z_dir=(1, 0, 0))):
        Polygon((1.15561e-12, 6.35), (34.13124999999998, 6.35), (34.13124999999998, 9.524999999999999), (1.15548e-12, 9.524999999999999), align=None)
    extrude(amount=-BOSS_EXTRUDE6_DEPTH)


    add(cut_extrude9_piece_4.part)  # Boss-Extrude7 merges Cut-Extrude9 piece 4
    # Sketch32 → Boss-Extrude7 (add)
    with BuildSketch(Plane.XY.offset(-145.80448193711126)):
        with Locations((-17.065625000015128, 7.937499999999998)):
            Rectangle(SKETCH32_W, SKETCH32_H)
    extrude(amount=-BOSS_EXTRUDE7_DEPTH)

    # Fillet2
    fillet2_edges = [cut_extrude9_piece_1_1.edges().sort_by_distance(p)[0] for p in [
        (-76.27533753088031, 9.524999999999999, -140.3779717667891),
        (-140.37797176678907, 9.524999999999999, -76.27533753088022),
    ]]
    fillet(fillet2_edges, radius=FILLET2_R)

    # Fillet3
    # the kernel refuses this fillet: 6.35 mm, written as the material it adds along each edge
    with BuildSketch(Plane(origin=(-34.13124999999996, 9.524999999999999, -148.43125000000003), x_dir=(0, 1, 0), z_dir=(1, 0, 8.3e-16))) as fillet3_piece_1:
        with BuildLine():
            CenterArc((5.143932731135228, 6.349999999999994), FILLET3_R, 215.89740993891724, 54.102590061082765)
            Line((0, 2.6267680628846506), (-0.10287865462270496, 2.5523034241423375))
            ThreePointArc((-0.10287865462270496, 2.5523034241423375), (-0.12700000000000067, 1.3133840314423253), (-0.12700000000000067, 0))
            Line((-0.12700000000000067, 0), (0, -0.12700000000000955))
            Line((0, -0.12700000000000955), (5.143932731135228, -0.12700000000000955))
            Line((5.143932731135228, -0.12700000000000955), (5.143932731135228, 0))
        make_face()
    extrude(amount=34.13124999999999)
    with BuildSketch(Plane(origin=(-148.43124999999995, 9.524999999999999, -2.082e-14), x_dir=(0, 1, 0), z_dir=(0, 0, -1))) as fillet3_piece_2:
        with BuildLine():
            CenterArc((5.143932731135228, 6.349999999999994), FILLET3_R, 215.89740993891724, 54.102590061082765)
            Line((0, 2.6267680628846506), (-0.10287865462270496, 2.5523034241423375))
            ThreePointArc((-0.10287865462270496, 2.5523034241423375), (-0.12700000000000067, 1.3133840314423253), (-0.12700000000000067, 0))
            Line((-0.12700000000000067, 0), (0, -0.12700000000000955))
            Line((0, -0.12700000000000955), (5.143932731135228, -0.12700000000000955))
            Line((5.143932731135228, -0.12700000000000955), (5.143932731135228, 0))
        make_face()
    extrude(amount=34.13124999999997)

    # Sketch33 → Cut-Extrude10 (cut, through all)
    with SkipClean():  # the faces are left unmerged after this step: merging them gives an invalid solid
        with BuildSketch(Plane(origin=(-145.8044819371153, 0, 0), x_dir=(0, 0, -1), z_dir=(1, 0, 0))):
            with Locations((2.8056010137752665, 32.04011842445572)):
                Rectangle(SKETCH33_W, SKETCH33_H)
        extrude(amount=-CUT_EXTRUDE10_DEPTH, mode=Mode.SUBTRACT)


solid = cut_extrude9_piece_1_1.part
